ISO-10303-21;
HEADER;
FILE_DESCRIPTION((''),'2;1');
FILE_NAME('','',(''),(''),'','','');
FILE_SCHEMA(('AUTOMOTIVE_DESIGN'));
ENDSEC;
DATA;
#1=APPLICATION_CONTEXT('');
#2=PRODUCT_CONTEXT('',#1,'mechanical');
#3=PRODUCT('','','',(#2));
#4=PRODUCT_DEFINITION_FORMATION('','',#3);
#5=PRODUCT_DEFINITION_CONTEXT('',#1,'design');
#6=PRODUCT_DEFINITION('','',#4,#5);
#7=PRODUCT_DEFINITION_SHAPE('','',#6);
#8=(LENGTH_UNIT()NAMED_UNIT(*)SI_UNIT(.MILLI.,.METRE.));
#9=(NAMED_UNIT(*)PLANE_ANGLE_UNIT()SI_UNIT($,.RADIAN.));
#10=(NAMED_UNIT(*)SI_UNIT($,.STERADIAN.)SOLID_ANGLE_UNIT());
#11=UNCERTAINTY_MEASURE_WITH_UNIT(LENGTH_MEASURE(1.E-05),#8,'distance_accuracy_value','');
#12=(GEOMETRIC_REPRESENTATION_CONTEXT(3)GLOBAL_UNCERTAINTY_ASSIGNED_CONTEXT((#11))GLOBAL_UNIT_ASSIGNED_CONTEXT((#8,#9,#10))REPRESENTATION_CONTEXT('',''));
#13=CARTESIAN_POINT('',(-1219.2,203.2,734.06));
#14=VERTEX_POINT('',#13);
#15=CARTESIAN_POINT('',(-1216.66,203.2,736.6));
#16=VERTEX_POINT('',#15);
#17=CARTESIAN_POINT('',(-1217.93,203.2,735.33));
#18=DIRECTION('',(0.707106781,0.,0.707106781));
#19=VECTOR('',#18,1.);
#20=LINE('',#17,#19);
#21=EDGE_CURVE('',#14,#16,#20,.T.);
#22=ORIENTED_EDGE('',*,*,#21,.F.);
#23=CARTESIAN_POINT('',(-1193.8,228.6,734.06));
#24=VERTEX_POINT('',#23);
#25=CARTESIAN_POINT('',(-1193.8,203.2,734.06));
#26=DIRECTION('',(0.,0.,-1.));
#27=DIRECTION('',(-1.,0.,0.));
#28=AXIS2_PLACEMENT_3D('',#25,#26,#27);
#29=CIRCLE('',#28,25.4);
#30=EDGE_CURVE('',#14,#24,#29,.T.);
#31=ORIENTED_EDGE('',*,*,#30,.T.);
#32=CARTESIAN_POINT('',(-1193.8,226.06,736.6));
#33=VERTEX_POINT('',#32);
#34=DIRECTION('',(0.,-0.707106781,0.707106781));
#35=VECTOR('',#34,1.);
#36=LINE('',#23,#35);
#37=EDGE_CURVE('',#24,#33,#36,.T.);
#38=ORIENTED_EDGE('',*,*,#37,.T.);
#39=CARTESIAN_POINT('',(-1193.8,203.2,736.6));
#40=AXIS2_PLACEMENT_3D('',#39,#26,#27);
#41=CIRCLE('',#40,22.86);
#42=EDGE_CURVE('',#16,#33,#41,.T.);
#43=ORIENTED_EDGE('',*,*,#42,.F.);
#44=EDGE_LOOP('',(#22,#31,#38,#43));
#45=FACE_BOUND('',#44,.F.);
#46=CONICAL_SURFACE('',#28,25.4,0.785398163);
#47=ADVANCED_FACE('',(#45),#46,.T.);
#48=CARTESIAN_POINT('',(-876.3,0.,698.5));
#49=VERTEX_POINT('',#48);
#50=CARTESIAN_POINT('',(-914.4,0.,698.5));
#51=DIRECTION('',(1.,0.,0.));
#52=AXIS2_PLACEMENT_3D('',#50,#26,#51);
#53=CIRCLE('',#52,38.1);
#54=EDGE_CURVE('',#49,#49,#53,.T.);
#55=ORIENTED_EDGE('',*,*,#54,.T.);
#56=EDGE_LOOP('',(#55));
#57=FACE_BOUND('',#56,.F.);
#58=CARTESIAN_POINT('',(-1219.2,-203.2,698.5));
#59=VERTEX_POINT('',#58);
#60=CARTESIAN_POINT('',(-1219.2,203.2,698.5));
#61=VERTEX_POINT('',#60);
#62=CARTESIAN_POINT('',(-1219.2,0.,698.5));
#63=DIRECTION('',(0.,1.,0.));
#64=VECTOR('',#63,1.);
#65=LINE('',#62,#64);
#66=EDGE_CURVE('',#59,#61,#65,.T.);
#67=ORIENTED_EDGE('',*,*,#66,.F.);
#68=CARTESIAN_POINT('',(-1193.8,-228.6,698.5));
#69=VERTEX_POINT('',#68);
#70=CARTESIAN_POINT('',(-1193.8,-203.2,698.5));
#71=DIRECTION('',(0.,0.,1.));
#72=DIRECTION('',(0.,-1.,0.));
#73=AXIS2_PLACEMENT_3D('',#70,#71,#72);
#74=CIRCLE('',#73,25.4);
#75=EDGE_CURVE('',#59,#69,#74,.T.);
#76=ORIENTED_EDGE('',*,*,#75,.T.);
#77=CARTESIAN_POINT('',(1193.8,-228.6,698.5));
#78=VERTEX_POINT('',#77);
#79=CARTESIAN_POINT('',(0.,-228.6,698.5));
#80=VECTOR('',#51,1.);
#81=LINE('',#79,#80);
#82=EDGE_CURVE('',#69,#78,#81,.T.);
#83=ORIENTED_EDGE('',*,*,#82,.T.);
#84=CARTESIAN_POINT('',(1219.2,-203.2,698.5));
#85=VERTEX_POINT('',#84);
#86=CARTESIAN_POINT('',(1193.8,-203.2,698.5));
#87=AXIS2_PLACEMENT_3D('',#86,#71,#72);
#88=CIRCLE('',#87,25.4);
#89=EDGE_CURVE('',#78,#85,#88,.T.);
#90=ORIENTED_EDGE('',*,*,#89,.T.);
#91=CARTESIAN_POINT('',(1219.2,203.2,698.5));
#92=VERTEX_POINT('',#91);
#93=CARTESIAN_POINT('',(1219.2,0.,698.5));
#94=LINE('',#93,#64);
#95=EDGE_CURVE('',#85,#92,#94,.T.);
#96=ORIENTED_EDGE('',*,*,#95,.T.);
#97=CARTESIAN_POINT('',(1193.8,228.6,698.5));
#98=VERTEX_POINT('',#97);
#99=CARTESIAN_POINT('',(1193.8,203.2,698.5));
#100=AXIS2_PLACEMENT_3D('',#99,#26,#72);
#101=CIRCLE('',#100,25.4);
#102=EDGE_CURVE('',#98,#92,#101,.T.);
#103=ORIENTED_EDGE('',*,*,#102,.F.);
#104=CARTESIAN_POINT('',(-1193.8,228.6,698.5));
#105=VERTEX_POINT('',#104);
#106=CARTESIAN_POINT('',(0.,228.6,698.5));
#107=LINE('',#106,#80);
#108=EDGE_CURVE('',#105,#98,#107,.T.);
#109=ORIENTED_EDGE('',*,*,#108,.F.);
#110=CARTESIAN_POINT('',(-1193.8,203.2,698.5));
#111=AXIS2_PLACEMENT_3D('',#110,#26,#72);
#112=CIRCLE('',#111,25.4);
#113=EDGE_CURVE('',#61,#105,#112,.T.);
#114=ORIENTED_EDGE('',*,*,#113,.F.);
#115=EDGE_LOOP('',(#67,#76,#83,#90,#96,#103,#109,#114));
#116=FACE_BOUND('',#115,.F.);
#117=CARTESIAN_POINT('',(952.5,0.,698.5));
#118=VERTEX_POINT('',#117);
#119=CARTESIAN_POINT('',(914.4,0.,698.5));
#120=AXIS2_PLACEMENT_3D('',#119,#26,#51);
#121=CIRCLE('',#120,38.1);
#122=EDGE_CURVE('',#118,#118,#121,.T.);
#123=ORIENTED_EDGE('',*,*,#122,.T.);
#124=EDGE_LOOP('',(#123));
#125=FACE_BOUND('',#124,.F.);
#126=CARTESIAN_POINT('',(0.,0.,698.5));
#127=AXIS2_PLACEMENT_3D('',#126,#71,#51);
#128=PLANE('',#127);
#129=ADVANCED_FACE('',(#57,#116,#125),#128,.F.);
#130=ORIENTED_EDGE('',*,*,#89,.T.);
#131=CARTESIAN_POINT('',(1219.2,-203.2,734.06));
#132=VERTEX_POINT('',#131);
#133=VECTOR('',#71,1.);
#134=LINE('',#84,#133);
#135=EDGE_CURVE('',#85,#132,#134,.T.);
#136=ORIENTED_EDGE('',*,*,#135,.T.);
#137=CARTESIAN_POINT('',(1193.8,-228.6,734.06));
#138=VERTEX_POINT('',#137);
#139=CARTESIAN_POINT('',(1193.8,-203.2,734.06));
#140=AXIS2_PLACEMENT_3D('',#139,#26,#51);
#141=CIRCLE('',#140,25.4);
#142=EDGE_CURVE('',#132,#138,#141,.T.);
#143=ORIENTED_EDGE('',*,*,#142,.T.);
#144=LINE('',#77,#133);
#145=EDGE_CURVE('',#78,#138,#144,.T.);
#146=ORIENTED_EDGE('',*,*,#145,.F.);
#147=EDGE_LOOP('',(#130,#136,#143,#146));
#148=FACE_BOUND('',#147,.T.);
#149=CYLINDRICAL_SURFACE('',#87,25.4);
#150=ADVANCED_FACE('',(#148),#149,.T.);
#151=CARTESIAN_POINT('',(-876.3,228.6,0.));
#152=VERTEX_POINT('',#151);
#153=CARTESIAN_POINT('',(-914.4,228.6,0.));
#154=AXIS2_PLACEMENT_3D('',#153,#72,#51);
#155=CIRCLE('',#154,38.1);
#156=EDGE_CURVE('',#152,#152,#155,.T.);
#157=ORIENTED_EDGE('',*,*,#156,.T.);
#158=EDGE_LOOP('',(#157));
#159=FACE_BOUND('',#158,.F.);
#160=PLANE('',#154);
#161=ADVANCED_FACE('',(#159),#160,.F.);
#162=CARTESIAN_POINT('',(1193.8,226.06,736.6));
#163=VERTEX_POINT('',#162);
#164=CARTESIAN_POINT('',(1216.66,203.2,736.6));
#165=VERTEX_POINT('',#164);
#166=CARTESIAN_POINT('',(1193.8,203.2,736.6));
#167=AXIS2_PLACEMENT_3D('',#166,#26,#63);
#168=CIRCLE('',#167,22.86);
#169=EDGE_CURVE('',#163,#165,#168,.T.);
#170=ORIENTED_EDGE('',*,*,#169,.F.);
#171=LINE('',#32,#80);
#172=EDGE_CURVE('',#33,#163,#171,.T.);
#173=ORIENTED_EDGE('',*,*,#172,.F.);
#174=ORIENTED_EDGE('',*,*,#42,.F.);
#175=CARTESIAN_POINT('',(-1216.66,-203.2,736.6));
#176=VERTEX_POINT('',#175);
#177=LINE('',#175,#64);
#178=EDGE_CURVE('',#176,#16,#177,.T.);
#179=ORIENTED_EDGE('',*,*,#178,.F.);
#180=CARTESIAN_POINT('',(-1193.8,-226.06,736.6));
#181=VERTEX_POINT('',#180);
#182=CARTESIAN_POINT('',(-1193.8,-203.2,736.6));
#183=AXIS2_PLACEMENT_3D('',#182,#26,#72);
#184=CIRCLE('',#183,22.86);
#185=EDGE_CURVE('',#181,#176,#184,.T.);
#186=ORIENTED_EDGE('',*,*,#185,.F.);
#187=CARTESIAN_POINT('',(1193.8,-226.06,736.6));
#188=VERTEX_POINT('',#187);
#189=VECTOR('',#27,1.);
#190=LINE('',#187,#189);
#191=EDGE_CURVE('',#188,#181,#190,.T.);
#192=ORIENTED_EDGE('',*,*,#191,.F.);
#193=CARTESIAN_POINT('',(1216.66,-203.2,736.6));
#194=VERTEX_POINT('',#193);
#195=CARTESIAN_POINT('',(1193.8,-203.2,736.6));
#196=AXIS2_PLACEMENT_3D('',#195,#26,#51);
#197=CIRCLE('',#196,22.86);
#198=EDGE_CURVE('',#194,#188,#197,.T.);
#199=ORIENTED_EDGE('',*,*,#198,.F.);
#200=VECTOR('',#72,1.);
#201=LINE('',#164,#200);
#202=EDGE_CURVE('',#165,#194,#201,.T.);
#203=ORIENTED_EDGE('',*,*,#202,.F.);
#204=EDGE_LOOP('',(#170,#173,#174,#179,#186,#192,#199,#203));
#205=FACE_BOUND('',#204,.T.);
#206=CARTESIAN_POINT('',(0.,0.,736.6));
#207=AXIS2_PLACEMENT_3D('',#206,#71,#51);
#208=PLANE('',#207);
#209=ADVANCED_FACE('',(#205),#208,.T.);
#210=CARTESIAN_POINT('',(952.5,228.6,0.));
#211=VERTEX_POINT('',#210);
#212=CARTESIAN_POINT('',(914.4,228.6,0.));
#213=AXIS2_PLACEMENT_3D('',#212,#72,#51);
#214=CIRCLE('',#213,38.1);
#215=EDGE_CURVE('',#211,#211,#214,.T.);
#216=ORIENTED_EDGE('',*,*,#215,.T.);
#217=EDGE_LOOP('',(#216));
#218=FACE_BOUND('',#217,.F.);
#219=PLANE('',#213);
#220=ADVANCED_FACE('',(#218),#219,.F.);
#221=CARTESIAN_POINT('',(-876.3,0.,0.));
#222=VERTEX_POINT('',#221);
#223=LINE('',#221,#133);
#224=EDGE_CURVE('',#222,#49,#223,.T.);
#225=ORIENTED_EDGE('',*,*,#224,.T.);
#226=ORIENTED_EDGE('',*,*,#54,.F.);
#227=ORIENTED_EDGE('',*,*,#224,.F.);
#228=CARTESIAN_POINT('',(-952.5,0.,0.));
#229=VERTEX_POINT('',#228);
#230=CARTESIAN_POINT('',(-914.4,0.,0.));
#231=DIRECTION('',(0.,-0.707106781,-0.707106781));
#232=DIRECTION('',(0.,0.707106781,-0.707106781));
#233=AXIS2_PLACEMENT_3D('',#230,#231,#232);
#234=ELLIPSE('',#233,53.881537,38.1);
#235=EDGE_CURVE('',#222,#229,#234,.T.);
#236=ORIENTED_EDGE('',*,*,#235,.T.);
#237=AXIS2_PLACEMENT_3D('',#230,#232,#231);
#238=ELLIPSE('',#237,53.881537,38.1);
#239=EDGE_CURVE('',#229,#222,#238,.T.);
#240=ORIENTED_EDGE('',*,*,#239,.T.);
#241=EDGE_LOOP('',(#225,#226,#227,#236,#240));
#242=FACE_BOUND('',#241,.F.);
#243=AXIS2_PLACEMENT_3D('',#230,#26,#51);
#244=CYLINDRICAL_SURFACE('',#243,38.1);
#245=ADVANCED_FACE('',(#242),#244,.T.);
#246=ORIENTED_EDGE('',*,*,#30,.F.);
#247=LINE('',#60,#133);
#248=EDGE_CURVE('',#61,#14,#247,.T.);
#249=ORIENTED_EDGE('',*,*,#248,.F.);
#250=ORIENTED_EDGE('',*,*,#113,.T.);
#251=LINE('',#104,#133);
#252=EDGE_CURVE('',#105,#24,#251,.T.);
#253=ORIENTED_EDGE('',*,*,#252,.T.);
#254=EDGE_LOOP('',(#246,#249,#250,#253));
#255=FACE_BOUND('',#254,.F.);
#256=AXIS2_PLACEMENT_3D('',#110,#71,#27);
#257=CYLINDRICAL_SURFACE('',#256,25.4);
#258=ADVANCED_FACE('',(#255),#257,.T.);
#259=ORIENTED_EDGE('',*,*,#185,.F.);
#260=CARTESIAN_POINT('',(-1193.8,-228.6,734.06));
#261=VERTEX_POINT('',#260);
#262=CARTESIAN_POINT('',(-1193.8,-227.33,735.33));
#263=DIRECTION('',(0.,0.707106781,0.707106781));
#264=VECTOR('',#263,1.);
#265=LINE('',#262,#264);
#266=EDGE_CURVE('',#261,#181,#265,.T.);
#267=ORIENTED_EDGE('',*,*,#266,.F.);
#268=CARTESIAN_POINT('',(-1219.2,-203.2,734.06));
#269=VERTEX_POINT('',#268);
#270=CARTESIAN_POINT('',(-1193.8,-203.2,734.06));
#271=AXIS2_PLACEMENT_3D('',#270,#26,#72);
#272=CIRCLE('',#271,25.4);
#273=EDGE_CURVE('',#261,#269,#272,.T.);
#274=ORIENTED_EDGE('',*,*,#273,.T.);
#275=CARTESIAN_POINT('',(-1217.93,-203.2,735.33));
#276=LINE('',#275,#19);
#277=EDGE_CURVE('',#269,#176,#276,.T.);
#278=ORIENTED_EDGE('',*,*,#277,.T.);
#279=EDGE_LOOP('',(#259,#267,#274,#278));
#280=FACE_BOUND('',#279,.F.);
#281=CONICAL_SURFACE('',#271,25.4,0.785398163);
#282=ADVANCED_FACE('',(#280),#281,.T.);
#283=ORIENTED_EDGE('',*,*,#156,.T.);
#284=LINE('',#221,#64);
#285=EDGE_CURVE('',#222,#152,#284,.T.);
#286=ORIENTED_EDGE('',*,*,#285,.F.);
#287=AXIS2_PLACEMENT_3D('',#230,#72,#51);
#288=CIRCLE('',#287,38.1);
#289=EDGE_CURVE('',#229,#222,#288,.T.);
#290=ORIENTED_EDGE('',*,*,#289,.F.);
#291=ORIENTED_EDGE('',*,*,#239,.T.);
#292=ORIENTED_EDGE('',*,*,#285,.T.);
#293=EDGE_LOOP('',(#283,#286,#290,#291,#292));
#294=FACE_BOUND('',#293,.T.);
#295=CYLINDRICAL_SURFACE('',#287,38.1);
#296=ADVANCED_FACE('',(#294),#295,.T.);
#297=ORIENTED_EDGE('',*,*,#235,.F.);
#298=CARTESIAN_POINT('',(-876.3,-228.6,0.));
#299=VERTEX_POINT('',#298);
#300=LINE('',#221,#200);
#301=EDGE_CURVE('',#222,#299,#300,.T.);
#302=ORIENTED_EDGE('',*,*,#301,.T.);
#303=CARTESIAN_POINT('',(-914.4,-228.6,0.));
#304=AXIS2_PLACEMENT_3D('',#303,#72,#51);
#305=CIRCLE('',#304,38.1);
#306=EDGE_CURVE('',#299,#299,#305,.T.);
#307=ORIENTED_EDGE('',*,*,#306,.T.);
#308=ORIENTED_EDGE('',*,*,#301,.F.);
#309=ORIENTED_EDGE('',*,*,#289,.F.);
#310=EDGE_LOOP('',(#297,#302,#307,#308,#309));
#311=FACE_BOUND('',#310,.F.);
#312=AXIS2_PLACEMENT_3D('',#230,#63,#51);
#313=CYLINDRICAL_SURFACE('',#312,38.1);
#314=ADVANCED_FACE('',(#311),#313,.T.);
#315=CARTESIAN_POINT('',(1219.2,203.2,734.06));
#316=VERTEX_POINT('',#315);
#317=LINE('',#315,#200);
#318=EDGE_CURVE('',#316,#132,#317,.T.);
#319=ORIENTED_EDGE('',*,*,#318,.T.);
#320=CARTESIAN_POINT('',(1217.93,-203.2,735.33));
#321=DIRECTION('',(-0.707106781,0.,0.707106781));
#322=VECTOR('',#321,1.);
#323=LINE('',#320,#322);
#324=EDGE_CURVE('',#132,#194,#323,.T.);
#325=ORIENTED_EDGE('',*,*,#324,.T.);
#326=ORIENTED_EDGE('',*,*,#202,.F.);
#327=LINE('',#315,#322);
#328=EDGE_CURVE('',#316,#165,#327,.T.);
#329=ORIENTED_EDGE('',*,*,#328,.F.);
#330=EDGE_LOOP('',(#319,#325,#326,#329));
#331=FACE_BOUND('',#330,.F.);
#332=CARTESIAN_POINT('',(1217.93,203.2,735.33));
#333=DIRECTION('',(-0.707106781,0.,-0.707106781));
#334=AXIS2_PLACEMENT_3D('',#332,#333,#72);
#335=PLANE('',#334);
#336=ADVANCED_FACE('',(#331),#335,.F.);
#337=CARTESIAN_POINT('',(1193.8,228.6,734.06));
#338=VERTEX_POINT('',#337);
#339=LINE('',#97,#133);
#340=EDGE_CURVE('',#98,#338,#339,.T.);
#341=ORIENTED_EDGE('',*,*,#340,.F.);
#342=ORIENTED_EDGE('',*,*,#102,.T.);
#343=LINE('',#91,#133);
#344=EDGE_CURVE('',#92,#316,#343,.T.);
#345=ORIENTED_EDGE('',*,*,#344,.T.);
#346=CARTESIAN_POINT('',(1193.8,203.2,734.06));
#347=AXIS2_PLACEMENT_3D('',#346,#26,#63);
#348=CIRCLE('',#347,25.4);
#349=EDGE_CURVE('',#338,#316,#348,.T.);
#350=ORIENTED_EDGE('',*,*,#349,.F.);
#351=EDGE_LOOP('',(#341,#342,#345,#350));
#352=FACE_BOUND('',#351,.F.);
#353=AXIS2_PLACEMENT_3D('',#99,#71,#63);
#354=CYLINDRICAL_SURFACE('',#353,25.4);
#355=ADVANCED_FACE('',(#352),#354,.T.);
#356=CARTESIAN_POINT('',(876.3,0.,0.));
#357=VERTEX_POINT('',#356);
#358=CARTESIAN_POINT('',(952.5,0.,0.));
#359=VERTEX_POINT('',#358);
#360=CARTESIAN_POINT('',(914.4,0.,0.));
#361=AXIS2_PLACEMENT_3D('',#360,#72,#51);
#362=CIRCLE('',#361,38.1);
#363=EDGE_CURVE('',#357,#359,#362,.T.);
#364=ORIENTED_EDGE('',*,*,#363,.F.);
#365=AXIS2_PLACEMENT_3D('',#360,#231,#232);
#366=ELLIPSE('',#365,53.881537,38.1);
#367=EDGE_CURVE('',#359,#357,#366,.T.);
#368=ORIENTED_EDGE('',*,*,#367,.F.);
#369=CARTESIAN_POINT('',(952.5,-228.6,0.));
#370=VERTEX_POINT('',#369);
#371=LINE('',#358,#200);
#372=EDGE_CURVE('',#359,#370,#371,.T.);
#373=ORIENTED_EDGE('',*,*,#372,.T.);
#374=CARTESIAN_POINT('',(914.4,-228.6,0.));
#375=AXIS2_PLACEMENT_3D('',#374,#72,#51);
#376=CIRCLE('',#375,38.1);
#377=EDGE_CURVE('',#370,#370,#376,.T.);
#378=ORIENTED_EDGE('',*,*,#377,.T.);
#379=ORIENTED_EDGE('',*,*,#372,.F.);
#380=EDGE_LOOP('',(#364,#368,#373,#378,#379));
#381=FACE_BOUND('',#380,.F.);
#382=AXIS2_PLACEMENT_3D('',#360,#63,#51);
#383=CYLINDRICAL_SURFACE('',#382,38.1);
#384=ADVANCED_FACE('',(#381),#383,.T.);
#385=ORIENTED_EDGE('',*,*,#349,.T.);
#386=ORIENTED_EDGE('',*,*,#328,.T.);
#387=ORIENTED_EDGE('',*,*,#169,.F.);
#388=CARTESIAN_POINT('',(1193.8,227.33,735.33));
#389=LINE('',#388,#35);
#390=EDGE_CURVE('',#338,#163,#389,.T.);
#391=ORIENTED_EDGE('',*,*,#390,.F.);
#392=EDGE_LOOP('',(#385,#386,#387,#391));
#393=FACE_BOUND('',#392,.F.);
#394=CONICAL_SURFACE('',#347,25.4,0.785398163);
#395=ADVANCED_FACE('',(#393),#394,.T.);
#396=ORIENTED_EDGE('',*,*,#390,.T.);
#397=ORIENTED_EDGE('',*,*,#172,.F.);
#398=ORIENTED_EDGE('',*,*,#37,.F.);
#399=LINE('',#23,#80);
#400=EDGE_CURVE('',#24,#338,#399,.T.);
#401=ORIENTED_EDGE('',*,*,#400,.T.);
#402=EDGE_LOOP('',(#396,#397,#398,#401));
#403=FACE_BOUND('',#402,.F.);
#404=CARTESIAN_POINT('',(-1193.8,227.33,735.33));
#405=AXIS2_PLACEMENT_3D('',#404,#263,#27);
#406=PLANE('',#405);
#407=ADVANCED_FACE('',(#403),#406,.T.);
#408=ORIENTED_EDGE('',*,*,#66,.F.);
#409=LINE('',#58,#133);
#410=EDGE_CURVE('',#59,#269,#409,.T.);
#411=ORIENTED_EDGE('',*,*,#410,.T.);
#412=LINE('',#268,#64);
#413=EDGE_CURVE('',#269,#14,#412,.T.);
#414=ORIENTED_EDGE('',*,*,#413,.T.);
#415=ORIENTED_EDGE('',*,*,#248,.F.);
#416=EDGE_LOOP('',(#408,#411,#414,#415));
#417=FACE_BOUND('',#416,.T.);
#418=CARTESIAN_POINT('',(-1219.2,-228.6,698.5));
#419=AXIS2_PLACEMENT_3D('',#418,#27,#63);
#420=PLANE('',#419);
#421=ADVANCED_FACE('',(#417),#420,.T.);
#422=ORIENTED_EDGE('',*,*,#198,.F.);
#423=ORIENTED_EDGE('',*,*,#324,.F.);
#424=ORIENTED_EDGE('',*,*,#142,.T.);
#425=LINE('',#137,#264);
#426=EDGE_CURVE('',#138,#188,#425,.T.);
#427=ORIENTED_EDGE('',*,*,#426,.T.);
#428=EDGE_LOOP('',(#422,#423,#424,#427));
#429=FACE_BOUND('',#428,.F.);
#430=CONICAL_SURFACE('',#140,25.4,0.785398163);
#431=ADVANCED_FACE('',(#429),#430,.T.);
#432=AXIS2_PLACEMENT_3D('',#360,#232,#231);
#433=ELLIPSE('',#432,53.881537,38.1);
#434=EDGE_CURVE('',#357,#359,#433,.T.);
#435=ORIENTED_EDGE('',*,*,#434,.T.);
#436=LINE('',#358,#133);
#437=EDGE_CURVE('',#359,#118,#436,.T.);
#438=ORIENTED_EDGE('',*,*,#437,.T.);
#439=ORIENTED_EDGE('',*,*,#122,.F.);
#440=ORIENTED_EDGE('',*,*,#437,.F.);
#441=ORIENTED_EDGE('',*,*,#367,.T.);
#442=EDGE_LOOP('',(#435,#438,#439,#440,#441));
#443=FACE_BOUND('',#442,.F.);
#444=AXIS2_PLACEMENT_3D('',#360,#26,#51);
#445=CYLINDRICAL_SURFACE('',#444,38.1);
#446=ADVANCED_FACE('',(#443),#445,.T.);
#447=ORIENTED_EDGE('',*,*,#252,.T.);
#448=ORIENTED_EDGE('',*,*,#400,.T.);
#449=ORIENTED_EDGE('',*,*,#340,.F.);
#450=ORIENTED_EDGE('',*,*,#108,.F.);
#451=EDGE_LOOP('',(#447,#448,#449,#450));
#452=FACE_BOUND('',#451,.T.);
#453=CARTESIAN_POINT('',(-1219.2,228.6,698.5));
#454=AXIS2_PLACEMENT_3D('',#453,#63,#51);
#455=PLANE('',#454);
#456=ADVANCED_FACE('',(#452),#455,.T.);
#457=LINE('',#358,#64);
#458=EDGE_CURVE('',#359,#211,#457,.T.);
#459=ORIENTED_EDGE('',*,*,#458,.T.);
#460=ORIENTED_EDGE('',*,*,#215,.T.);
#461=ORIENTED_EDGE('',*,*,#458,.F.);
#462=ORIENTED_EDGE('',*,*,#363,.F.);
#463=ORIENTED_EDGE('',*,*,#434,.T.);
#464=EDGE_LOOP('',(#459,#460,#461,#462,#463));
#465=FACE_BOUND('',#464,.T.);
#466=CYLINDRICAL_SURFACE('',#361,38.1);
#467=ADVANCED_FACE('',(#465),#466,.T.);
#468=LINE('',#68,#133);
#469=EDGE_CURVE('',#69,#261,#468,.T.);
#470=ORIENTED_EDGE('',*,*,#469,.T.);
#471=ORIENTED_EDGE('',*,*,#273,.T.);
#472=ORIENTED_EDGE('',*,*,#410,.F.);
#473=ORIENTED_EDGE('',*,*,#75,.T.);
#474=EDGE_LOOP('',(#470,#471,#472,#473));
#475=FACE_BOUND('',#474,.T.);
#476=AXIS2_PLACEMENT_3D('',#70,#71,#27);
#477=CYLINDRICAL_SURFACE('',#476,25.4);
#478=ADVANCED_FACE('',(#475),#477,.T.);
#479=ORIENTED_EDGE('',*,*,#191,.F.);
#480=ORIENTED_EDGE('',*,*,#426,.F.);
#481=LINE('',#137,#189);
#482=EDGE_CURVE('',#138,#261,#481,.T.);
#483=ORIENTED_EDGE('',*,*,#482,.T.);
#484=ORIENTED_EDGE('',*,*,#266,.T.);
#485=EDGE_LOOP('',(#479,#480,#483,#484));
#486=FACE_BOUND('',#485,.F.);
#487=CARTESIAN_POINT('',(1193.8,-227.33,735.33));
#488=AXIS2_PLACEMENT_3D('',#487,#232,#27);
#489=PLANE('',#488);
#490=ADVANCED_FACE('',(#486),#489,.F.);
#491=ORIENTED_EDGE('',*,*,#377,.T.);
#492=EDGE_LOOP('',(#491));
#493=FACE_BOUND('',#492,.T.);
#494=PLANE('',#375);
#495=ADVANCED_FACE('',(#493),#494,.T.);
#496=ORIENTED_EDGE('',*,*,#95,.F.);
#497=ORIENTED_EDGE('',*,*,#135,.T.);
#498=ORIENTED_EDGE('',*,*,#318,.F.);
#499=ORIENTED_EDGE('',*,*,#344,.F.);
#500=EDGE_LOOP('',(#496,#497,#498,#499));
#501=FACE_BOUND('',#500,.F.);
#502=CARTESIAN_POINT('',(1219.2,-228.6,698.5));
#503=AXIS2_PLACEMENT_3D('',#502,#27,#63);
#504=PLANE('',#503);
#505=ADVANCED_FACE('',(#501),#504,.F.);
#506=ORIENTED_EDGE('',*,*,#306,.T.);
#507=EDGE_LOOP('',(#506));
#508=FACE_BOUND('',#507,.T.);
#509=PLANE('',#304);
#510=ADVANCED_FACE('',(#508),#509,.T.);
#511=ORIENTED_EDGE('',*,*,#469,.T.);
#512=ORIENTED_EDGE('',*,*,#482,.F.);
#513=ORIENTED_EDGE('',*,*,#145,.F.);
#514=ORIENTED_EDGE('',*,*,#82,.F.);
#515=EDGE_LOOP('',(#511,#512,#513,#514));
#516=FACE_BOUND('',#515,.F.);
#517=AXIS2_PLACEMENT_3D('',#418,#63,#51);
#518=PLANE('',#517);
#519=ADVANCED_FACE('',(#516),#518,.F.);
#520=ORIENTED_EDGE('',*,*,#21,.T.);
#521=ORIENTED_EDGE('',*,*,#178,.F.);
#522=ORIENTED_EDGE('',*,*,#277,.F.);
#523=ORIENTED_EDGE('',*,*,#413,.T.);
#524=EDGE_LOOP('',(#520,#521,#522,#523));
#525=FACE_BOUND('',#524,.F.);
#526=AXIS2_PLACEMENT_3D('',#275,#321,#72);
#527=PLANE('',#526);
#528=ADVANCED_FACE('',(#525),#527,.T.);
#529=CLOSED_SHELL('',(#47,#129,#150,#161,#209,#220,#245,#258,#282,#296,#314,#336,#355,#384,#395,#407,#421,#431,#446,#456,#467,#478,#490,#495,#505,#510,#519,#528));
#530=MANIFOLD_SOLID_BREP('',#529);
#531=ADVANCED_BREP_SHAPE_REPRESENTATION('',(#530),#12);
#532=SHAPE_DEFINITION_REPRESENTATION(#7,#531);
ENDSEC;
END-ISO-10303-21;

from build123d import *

# Parameters (mm, degrees)
F3_START      = 698.5
F2_W          = 2438.4
F2_H          = 457.2
F2_R          = 38.1
F3_DEPTH      = 38.1
F4_DEPTH      = 736.6
F5_R          = 38.1
F6_DEPTH      = 228.6
F6_DEPTH_BACK = 228.6
F7_R          = 25.4
F8_SIZE       = 2.54


# Not quite as in the source:
# - a variable given as a bare number and used for a length is read in inches; the dataset says mm whatever the document's units were


with BuildPart() as f3:
    # F2 (on Top) → F3 (new body)
    with BuildSketch(Plane.XY.offset(F3_START)):
        Rectangle(F2_W, F2_H)
        with Locations((-914.4, 0)):
            Circle(F2_R, mode=Mode.SUBTRACT)
        with Locations((914.4, 0)):
            Circle(F2_R, mode=Mode.SUBTRACT)
        with Locations((-914.4, 0)):
            Circle(F2_R)
        with Locations((914.4, 0)):
            Circle(F2_R)
    extrude(amount=F3_DEPTH)

    # F2 (on Top) → F4 (join)
    with BuildSketch(Plane.XY):
        with Locations((-914.4, 0)):
            Circle(F2_R)
        with Locations((914.4, 0)):
            Circle(F2_R)
    extrude(amount=F4_DEPTH)

    # F5 (on Front) → F6 (join, two sides)
    with BuildSketch(Plane.XZ) as f6_sk:
        with Locations((-914.4, 0)):
            Circle(F5_R)
        with Locations((914.4, 0)):
            Circle(F5_R)
    extrude(amount=F6_DEPTH)
    extrude(f6_sk.sketch, amount=-F6_DEPTH_BACK)

    # F7
    f7_edges = [f3.edges().sort_by_distance(p)[0] for p in [
        (1219.2, -228.6, 717.55),
        (1219.2, 228.6, 717.55),
        (-1219.2, -228.6, 717.55),
        (-1219.2, 228.6, 717.55),
    ]]
    fillet(f7_edges, radius=F7_R)

    # F8
    f8_edges = [f3.edges().sort_by_distance(p)[0] for p in [
        (-1219.2, 0, 736.6),
        (-1211.760512, 221.160512, 736.6),
        (0, 228.6, 736.6),
        (-1211.760512, -221.160512, 736.6),
        (0, -228.6, 736.6),
        (1219.2, 0, 736.6),
        (1211.760512, 221.160512, 736.6),
        (1211.760512, -221.160512, 736.6),
    ]]
    chamfer(f8_edges, length=F8_SIZE)


solid = f3.part
